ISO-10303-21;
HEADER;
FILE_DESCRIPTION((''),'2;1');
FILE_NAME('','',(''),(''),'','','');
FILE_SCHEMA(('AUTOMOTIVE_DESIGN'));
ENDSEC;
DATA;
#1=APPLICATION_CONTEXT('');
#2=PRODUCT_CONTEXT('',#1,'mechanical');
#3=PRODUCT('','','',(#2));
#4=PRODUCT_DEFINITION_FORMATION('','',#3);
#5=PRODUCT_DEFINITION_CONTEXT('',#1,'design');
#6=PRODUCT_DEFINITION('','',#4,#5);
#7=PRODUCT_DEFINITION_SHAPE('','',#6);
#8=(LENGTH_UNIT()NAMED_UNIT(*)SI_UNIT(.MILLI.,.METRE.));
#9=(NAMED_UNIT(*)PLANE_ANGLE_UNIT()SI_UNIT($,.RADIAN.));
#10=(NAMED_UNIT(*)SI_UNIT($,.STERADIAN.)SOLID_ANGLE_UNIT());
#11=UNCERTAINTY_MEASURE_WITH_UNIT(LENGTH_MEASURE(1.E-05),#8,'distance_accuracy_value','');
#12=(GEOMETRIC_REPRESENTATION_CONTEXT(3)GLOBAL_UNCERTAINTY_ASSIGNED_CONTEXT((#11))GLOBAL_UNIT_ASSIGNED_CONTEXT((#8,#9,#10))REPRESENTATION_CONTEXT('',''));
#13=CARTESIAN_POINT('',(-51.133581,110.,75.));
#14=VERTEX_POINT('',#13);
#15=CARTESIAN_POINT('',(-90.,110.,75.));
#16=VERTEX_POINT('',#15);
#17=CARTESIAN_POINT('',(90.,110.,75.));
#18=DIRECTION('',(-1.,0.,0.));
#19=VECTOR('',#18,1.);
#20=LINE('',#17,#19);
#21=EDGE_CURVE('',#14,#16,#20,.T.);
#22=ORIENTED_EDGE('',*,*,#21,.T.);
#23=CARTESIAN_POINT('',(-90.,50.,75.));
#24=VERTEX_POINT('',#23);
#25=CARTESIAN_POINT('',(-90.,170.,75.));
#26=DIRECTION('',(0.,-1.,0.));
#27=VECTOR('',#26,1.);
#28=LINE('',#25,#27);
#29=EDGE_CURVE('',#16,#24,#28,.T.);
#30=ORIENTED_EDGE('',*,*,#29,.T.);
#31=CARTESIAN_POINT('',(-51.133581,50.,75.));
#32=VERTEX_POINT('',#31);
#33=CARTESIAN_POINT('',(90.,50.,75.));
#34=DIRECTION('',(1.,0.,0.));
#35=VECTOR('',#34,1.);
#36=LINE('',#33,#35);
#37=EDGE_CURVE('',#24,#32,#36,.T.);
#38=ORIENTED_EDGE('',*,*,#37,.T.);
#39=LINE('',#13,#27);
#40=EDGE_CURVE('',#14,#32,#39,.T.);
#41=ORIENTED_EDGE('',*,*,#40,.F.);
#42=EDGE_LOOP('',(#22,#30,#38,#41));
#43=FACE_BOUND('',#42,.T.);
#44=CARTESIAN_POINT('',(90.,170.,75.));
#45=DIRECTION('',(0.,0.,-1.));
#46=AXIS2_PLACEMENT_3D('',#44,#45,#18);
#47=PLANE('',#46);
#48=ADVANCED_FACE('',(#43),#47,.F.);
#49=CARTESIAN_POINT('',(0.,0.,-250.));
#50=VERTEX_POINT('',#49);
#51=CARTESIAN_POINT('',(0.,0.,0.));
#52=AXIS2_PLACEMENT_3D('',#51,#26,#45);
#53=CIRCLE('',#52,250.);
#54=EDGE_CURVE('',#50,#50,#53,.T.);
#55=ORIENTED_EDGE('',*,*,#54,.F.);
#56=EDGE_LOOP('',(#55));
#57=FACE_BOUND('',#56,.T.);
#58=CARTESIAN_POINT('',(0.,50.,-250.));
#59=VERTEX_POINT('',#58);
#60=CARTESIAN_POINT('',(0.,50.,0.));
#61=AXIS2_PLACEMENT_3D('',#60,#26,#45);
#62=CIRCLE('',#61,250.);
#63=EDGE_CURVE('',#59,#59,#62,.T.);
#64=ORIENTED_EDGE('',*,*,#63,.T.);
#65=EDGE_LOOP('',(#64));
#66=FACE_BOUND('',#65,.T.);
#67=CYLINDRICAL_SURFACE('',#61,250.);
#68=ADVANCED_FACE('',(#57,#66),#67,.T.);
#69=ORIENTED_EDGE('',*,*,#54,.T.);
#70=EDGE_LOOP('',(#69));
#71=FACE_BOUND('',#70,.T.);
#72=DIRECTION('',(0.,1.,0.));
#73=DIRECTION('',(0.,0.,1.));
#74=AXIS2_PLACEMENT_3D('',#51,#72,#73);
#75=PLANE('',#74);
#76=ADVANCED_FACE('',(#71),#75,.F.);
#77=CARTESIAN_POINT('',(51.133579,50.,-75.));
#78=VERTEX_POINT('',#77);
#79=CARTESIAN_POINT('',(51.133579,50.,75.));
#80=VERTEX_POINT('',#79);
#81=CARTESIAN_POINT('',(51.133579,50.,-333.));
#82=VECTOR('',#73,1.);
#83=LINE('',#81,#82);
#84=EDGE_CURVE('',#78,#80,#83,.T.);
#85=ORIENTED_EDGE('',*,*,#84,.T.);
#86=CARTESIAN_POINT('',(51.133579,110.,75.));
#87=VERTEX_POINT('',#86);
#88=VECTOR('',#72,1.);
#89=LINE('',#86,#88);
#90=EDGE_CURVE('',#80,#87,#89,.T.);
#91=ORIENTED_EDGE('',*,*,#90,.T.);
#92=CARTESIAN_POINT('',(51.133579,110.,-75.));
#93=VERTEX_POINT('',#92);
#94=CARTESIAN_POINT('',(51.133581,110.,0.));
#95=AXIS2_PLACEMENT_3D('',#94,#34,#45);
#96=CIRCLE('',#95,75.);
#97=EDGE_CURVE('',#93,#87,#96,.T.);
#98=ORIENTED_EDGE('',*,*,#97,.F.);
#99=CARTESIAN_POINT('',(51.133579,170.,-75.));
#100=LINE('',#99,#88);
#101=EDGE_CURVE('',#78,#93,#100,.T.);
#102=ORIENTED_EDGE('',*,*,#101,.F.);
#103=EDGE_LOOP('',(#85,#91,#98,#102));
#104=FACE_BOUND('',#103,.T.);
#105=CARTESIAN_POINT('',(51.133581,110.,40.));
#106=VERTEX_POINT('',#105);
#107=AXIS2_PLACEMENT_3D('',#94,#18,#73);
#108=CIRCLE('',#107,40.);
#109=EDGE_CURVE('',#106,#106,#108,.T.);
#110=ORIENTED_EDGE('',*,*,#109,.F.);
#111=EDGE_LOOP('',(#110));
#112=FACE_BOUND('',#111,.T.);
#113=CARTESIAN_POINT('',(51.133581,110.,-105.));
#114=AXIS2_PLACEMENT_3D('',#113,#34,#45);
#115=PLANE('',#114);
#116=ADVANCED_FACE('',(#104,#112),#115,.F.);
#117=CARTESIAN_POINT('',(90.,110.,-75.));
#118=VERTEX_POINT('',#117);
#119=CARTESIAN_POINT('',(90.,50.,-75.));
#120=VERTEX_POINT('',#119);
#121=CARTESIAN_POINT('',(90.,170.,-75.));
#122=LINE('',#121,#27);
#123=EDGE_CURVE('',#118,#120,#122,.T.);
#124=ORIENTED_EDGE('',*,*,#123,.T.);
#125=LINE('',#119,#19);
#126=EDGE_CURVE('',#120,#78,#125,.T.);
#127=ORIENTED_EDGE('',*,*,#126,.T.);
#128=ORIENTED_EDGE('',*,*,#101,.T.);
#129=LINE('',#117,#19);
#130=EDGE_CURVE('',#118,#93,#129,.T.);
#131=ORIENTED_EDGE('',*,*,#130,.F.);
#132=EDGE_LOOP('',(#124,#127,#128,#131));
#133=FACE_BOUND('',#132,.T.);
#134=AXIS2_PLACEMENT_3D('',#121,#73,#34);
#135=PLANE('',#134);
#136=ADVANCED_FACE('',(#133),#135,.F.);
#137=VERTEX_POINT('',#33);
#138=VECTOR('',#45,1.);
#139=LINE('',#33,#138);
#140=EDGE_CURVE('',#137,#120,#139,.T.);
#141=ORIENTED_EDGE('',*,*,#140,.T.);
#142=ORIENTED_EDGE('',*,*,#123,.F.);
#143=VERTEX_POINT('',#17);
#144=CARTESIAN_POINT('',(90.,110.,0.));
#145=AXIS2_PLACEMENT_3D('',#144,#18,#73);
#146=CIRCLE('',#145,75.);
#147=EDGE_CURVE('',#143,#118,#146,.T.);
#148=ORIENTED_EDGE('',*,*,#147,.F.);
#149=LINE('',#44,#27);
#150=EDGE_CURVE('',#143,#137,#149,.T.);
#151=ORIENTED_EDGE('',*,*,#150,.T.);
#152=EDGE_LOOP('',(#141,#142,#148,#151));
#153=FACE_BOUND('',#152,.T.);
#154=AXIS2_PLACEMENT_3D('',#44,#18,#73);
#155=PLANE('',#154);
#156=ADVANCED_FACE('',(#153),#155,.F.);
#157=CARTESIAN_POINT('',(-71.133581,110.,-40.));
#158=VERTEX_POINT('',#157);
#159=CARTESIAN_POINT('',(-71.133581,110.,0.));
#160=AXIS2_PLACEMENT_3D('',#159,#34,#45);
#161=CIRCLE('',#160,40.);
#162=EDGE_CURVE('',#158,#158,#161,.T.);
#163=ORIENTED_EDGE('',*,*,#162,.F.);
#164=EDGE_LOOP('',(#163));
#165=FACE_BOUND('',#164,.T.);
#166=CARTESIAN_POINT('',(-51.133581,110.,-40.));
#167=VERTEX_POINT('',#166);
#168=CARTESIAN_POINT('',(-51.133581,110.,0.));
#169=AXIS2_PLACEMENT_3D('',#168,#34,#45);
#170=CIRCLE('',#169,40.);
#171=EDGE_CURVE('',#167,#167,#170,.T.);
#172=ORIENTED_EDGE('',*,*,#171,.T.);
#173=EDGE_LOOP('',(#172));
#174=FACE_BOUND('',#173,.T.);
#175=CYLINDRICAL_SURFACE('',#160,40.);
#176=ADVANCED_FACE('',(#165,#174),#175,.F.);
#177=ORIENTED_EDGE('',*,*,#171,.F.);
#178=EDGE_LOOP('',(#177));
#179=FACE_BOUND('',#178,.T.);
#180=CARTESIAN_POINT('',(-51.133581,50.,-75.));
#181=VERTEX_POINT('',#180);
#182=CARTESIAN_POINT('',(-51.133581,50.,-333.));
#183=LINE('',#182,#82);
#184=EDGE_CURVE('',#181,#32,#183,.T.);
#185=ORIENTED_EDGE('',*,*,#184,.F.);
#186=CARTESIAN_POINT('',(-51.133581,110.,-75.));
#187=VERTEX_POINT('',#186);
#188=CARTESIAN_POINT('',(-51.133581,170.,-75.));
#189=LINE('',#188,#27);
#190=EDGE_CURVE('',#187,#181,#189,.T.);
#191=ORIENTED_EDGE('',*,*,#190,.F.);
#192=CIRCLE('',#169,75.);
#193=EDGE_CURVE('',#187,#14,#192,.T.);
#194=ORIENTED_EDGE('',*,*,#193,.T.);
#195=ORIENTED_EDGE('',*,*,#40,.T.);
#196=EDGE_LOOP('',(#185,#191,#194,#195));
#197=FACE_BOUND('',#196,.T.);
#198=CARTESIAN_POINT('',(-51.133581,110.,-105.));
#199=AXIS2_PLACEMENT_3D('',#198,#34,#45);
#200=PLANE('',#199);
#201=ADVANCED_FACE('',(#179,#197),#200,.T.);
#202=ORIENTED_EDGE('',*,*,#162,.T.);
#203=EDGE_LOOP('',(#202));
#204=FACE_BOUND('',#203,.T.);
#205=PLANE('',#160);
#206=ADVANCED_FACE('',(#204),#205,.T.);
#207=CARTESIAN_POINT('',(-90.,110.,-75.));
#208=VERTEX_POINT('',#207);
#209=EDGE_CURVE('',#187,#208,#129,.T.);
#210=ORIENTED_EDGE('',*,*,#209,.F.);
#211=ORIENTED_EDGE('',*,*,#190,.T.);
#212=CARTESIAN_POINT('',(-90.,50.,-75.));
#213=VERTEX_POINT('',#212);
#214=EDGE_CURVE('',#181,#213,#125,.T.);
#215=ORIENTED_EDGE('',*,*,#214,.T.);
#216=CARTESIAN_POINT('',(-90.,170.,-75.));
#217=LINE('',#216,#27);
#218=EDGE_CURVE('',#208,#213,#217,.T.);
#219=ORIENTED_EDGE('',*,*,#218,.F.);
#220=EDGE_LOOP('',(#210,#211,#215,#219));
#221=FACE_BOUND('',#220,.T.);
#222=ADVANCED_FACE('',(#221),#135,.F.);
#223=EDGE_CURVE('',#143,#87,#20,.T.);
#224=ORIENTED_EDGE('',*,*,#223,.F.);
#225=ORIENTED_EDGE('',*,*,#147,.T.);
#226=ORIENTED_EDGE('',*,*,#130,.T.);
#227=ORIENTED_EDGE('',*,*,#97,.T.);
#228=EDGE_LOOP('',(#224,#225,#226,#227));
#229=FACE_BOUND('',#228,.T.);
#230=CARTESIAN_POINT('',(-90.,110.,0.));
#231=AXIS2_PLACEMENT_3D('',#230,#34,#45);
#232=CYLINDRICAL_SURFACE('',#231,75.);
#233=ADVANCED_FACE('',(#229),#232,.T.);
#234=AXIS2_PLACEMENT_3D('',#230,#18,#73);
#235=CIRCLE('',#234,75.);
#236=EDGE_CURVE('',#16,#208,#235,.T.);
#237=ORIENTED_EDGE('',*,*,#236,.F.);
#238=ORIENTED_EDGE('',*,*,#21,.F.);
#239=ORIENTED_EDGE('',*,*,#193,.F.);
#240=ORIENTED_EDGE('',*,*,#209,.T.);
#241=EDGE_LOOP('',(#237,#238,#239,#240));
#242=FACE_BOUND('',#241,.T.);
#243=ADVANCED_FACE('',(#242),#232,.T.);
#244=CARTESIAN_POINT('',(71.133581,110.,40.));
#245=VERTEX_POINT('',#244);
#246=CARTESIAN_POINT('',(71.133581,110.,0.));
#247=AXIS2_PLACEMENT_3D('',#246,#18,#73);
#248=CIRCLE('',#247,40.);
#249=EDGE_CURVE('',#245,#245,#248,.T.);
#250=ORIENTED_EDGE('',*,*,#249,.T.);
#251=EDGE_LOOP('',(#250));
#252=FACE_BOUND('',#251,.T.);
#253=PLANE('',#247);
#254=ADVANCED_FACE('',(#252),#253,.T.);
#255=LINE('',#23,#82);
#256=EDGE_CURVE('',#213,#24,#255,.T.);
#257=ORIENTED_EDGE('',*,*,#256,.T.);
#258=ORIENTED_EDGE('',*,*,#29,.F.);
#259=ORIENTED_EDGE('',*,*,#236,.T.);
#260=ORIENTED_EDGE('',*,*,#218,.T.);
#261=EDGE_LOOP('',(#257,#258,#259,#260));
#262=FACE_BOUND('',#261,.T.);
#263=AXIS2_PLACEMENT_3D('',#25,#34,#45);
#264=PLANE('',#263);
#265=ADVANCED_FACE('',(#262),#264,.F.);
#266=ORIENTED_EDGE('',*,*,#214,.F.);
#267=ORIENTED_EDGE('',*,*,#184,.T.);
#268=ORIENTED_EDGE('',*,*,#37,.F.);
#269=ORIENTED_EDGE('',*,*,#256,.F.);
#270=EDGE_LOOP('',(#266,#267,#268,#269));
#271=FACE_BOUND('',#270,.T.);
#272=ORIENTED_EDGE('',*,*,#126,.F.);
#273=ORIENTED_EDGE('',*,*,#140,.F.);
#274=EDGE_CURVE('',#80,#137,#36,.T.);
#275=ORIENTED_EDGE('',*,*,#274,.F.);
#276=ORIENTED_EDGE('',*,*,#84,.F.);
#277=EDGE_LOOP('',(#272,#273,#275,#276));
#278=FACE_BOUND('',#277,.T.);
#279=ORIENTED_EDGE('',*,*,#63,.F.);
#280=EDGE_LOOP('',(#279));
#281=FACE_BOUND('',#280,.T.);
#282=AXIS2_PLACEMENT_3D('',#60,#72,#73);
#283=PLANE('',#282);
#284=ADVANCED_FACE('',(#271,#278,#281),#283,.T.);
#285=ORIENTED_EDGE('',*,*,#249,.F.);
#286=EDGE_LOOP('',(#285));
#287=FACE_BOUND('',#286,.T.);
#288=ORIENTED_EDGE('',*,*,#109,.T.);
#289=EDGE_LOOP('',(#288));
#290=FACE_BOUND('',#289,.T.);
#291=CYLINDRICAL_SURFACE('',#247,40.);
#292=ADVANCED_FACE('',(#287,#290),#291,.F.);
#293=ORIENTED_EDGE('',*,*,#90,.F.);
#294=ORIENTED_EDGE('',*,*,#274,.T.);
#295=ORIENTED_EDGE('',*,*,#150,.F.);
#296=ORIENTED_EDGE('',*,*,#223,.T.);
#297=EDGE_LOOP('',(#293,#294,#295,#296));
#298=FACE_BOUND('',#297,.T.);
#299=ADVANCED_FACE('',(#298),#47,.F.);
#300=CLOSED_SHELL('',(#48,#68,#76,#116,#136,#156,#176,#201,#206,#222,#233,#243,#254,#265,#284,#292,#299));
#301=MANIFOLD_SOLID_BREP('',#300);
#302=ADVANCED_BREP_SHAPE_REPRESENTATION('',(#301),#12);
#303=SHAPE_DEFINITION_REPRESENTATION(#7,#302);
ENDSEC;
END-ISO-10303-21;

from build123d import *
from OCP.BRepAlgoAPI import BRepAlgoAPI_Cut
from OCP.TopTools import TopTools_ListOfShape

# Parameters (mm, degrees)
SKETCH1_R           = 150
BOSS_EXTRUDE1_DEPTH = 50
SKETCH2_W           = 180
SKETCH2_H           = 150
BOSS_EXTRUDE2_DEPTH = 120
SKETCH4_W           = 150
SKETCH4_H           = 60
CUT_EXTRUDE1_DEPTH  = 180
BOSS_EXTRUDE3_DEPTH = 180
SKETCH5_W           = 102.267162736
SKETCH5_H           = 75
CUT_EXTRUDE3_DEPTH  = 180
CUT_EXTRUDE4_START  = 100
CUT_EXTRUDE4_DEPTH  = 100
CUT_EXTRUDE5_START  = -2.26716
CUT_EXTRUDE5_DEPTH  = 2.26716
SKETCH12_R          = 40
CUT_EXTRUDE6_DEPTH  = 20
CUT_EXTRUDE7_START  = -20
SKETCH11_R          = 40
CUT_EXTRUDE7_DEPTH  = 20
SKETCH15_W          = 102.26716
SKETCH15_H          = 60
CUT_EXTRUDE8_DEPTH  = 408
SKETCH16_R          = 250
BOSS_EXTRUDE4_DEPTH = 50


with BuildPart() as part:
    # Sketch1 → Boss-Extrude1 (new body)
    with BuildSketch(Plane(origin=(0, 0, 0), x_dir=(1, 0, 0), z_dir=(0, 1, 0))):
        Circle(SKETCH1_R)
    extrude(amount=BOSS_EXTRUDE1_DEPTH)

    # Sketch2 → Boss-Extrude2 (add)
    with BuildSketch(Plane(origin=(0, 50, 0), x_dir=(1, 0, 0), z_dir=(0, 1, 0))):
        Rectangle(SKETCH2_W, SKETCH2_H)
    extrude(amount=BOSS_EXTRUDE2_DEPTH)

    # Sketch4 → Cut-Extrude1 (cut)
    with BuildSketch(Plane.ZY.offset(90)):
        with Locations((0, 140)):
            Rectangle(SKETCH4_W, SKETCH4_H)
    extrude(amount=-CUT_EXTRUDE1_DEPTH, mode=Mode.SUBTRACT)

    # Sketch3 → Boss-Extrude3 (add)
    with BuildSketch(Plane(origin=(90, 0, 0), x_dir=(0, 0, -1), z_dir=(1, 0, 0))):
        with BuildLine():
            Line((-75, 110), (-75, 50))
            Line((-75, 50), (75, 50))
            Line((75, 50), (75, 110))
            ThreePointArc((75, 110), (0, 185), (-75, 110))
        make_face()
    extrude(amount=-BOSS_EXTRUDE3_DEPTH)

    # Sketch5 → Cut-Extrude3 (cut)
    with BuildSketch(Plane.XY.offset(75)):
        with Locations((0, 147.5)):
            Rectangle(SKETCH5_W, SKETCH5_H)
    extrude(amount=-CUT_EXTRUDE3_DEPTH, mode=Mode.SUBTRACT)

    # Sketch8 → Cut-Extrude4 (cut)
    with BuildSketch(Plane(origin=(-51.133581368, 0, 0), x_dir=(0, 0, -1), z_dir=(1, 0, 0)).offset(CUT_EXTRUDE4_START)):
        with BuildLine():
            Line((-75, 110), (75, 110))
            ThreePointArc((75, 110), (0, 35), (-75, 110))
        make_face()
    extrude(amount=-CUT_EXTRUDE4_DEPTH, mode=Mode.SUBTRACT)

    # Sketch10 → Cut-Extrude5 (cut)
    with BuildSketch(Plane.ZY.offset(-48.866418632).offset(CUT_EXTRUDE5_START)):
        with BuildLine():
            Line((-75, 110), (75, 110))
            ThreePointArc((75, 110), (0, 35), (-75, 110))
        make_face()
    extrude(amount=CUT_EXTRUDE5_DEPTH, mode=Mode.SUBTRACT)


with BuildPart() as cut_extrude6_tool:
    # Sketch12 → Cut-Extrude6 (new body)
    with BuildSketch(Plane.ZY.offset(-51.133581368)):
        with Locations((0, 110)):
            Circle(SKETCH12_R)
    extrude(amount=-CUT_EXTRUDE6_DEPTH)


with BuildPart() as part_1:
    add(part.part)

    # Cut-Extrude6: cut by cut_extrude6_tool, with a tolerance
    cut_extrude6_stock = TopTools_ListOfShape()
    cut_extrude6_stock.Append(part_1.part.wrapped)
    cut_extrude6_tools = TopTools_ListOfShape()
    cut_extrude6_tools.Append(cut_extrude6_tool.part.wrapped)
    cut_extrude6_cut = BRepAlgoAPI_Cut()
    cut_extrude6_cut.SetArguments(cut_extrude6_stock)
    cut_extrude6_cut.SetTools(cut_extrude6_tools)
    cut_extrude6_cut.SetFuzzyValue(0.00001)
    cut_extrude6_cut.Build()
    add(Compound.cast(cut_extrude6_cut.Shape()).solids(), mode=Mode.REPLACE)

    # Sketch11 → Cut-Extrude7 (cut)
    with BuildSketch(Plane(origin=(-51.133581368, 0, 0), x_dir=(0, 0, -1), z_dir=(1, 0, 0)).offset(CUT_EXTRUDE7_START)):
        with Locations((0, 110)):
            Circle(SKETCH11_R)
    extrude(amount=CUT_EXTRUDE7_DEPTH, mode=Mode.SUBTRACT)

    # Sketch15 → Cut-Extrude8 (cut)
    with BuildSketch(Plane.XY.offset(75)):
        with Locations((-1.368e-06, 80)):
            Rectangle(SKETCH15_W, SKETCH15_H)
    extrude(amount=-CUT_EXTRUDE8_DEPTH, mode=Mode.SUBTRACT)

    # Sketch16 → Boss-Extrude4 (add)
    with BuildSketch(Plane.XZ):
        Circle(SKETCH16_R)
    extrude(amount=-BOSS_EXTRUDE4_DEPTH)


solid = part_1.part
